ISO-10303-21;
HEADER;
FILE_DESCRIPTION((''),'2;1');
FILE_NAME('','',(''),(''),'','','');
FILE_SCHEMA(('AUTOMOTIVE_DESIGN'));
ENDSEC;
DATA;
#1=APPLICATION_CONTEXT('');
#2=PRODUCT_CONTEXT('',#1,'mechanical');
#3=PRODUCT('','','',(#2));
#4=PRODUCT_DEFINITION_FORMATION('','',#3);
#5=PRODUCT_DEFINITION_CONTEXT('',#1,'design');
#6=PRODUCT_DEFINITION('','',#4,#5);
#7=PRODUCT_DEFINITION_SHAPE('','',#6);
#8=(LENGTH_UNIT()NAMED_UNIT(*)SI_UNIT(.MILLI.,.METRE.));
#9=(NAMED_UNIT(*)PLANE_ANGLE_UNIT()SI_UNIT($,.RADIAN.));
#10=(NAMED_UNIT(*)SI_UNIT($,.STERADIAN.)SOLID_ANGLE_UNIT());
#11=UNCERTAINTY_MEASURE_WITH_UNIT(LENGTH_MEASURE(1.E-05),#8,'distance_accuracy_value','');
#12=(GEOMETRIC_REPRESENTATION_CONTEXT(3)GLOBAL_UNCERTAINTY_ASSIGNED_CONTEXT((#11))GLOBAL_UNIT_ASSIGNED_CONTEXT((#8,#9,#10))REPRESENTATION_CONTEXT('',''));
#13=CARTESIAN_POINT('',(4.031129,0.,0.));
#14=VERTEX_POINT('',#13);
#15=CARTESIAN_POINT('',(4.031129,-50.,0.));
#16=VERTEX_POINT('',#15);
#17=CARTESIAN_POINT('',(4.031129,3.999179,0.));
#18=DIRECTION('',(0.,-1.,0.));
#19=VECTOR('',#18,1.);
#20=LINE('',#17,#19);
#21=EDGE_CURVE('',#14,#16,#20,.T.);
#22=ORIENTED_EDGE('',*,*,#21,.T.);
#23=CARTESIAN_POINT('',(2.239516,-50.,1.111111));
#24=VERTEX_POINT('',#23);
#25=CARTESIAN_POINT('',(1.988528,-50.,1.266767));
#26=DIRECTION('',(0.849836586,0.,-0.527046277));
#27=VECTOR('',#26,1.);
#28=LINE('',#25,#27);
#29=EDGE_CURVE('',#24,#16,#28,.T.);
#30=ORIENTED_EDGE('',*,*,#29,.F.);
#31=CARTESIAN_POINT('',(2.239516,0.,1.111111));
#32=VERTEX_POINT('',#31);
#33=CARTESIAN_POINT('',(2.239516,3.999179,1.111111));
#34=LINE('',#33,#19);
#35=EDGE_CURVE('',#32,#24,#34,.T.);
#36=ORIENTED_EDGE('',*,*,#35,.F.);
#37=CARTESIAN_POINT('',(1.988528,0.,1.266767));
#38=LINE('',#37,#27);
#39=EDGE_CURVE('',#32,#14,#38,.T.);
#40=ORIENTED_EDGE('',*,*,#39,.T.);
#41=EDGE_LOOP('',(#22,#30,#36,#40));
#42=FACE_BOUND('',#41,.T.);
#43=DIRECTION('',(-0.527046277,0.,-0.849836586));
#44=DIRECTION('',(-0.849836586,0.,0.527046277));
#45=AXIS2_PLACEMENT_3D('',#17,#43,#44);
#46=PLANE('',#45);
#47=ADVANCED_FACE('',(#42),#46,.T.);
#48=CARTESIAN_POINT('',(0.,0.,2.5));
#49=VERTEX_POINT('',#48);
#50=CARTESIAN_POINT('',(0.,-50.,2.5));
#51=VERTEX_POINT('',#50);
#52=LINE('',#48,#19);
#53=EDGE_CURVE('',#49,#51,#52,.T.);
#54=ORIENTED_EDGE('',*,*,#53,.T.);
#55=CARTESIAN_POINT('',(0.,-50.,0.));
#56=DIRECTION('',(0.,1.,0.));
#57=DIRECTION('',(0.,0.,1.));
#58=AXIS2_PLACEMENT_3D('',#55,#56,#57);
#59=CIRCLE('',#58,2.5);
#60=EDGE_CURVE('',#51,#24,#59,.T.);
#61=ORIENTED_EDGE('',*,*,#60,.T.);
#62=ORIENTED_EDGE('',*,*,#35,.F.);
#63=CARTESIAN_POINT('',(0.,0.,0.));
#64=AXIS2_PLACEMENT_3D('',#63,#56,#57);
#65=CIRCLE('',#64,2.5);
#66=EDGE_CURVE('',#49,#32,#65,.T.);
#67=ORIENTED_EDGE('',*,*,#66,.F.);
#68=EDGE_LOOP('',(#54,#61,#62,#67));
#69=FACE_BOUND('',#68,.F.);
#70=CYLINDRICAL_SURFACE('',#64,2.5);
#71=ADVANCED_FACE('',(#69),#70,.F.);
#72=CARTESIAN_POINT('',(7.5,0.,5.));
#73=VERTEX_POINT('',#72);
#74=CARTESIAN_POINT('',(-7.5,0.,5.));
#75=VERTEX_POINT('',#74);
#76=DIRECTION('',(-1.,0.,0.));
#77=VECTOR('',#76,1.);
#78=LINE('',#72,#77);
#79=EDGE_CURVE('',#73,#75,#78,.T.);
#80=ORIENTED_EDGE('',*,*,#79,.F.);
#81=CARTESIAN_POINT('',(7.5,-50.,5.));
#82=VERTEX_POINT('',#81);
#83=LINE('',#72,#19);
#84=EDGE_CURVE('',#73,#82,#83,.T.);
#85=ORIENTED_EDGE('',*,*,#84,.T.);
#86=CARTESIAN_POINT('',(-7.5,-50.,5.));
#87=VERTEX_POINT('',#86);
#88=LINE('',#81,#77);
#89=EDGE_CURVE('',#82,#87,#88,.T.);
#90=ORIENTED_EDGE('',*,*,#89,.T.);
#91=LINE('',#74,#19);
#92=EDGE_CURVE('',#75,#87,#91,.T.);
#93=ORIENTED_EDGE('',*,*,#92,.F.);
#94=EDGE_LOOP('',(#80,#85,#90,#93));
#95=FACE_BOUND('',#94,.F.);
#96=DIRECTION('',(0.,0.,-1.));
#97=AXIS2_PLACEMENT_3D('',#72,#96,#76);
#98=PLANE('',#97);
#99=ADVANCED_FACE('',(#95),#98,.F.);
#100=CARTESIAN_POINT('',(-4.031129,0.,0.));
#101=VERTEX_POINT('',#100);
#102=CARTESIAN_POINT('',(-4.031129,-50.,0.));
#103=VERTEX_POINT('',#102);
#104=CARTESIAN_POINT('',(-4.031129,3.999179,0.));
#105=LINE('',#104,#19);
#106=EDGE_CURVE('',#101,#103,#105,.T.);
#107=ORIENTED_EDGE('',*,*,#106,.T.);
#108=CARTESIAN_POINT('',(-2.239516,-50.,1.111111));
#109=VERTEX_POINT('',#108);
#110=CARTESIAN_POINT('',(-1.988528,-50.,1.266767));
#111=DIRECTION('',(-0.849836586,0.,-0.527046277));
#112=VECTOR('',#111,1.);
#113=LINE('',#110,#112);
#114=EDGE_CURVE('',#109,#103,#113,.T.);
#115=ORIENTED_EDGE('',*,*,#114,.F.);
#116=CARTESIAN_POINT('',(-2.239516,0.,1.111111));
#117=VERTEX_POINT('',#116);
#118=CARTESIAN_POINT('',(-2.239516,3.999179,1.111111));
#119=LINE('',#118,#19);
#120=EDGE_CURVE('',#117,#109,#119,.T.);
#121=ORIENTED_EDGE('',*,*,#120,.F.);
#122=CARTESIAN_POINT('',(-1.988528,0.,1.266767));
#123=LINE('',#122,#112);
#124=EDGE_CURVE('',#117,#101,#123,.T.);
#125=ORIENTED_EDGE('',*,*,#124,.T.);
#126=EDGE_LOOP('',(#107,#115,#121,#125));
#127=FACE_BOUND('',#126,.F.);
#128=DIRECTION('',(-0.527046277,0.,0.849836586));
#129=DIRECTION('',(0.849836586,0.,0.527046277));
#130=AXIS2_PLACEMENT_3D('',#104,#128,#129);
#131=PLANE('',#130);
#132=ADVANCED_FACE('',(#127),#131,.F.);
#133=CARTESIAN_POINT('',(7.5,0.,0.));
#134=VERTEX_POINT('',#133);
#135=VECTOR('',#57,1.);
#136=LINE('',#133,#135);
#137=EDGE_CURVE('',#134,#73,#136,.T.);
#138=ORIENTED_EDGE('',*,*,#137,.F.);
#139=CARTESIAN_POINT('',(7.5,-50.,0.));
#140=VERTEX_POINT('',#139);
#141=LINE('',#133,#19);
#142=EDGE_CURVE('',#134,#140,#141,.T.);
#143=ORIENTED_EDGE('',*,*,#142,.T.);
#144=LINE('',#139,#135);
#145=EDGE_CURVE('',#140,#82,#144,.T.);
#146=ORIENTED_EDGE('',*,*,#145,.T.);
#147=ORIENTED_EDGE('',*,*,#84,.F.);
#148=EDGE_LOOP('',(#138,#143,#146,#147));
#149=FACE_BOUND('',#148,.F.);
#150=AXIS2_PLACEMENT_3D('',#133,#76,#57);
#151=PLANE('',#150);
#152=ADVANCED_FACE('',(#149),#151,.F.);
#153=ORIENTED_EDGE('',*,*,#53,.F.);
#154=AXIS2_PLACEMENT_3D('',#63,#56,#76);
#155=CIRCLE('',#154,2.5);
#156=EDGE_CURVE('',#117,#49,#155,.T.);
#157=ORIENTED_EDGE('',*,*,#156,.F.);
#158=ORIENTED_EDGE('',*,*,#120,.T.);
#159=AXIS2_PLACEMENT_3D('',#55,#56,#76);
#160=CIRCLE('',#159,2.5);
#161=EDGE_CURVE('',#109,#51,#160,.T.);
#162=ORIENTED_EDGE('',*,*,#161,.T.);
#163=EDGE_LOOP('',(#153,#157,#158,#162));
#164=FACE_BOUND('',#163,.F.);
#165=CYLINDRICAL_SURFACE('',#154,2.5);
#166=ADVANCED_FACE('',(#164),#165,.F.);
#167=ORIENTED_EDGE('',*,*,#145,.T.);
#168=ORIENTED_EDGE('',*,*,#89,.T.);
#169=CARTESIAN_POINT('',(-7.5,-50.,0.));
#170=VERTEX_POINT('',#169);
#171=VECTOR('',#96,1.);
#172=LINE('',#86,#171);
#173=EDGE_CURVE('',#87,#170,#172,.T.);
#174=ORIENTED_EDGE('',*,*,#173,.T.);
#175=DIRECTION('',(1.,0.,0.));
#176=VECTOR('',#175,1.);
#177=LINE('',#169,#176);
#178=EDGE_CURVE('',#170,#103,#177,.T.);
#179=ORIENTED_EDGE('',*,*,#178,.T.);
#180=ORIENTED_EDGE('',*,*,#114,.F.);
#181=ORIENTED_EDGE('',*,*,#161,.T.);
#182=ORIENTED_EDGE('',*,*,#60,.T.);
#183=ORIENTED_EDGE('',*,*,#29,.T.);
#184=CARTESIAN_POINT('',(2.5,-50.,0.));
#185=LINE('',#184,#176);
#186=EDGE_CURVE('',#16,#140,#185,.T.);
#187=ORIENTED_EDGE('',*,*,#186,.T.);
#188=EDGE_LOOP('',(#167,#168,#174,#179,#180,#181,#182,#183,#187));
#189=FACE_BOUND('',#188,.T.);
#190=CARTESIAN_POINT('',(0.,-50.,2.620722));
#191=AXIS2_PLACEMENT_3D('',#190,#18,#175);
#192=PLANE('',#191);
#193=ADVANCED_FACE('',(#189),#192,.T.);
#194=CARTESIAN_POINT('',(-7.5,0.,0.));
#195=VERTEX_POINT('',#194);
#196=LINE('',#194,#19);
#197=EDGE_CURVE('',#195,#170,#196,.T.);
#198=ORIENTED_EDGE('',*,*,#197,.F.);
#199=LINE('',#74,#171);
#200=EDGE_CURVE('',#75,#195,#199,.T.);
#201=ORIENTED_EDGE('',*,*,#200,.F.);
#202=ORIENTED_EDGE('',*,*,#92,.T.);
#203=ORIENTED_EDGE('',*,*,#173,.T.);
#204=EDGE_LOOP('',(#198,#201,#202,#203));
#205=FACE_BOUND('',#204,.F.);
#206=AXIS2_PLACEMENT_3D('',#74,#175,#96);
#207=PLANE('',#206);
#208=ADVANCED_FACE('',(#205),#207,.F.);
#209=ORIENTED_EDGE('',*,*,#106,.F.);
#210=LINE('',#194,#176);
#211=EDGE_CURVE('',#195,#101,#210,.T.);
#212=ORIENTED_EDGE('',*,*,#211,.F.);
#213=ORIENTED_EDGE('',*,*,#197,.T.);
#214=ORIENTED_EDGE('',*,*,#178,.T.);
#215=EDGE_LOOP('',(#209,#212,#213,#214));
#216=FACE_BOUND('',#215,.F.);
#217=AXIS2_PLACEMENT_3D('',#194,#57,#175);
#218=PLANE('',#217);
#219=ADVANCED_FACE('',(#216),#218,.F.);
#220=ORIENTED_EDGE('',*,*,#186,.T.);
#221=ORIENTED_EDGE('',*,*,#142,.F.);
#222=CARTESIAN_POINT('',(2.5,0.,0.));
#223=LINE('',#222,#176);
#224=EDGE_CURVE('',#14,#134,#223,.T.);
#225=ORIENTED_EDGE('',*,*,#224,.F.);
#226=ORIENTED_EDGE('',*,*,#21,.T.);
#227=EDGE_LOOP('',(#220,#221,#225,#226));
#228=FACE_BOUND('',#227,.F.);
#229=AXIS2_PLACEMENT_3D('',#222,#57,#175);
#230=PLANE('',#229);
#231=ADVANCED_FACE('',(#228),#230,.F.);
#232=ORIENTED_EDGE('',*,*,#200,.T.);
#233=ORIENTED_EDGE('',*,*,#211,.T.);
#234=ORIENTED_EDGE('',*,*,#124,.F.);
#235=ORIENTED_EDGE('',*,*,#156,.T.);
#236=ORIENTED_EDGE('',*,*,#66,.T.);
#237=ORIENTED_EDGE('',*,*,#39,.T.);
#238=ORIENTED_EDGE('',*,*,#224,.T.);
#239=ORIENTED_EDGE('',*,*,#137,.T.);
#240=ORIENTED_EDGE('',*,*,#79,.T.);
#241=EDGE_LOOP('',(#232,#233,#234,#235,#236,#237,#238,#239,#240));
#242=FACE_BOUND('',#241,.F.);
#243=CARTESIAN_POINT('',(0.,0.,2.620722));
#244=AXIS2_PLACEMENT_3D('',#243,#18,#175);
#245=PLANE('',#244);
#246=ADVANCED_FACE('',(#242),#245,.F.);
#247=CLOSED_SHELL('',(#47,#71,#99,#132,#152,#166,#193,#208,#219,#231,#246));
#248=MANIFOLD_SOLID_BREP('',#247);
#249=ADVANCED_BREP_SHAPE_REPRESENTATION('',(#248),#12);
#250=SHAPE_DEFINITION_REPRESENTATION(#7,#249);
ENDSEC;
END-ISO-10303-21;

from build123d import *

# Parameters (mm, degrees)
F1_DEPTH    = 50
F2_T1_DEPTH = 57.9983578358


# Not quite as in the source:
# - a fillet or chamfer that OpenCascade refuses, or shapes differently, is made with other operations: its cross-section is extruded or revolved along the edge and cut away or added


with BuildPart() as f1:
    # F0 (on Front) → F1 (new body)
    with BuildSketch(Plane.XZ):
        with BuildLine():
            Line((7.5, 5), (0, 5))
            Line((0, 5), (-7.5, 5))
            Line((-7.5, 5), (-7.5, 0))
            Line((-7.5, 0), (-2.5, 0))
            ThreePointArc((-2.5, 0), (-1.767766953, 1.767766953), (0, 2.5))
            ThreePointArc((0, 2.5), (1.767766953, 1.767766953), (2.5, 0))
            Line((2.5, 0), (7.5, 0))
            Line((7.5, 0), (7.5, 5))
        make_face()
    extrude(amount=F1_DEPTH)

    # F2: chamfer of 2 on 2 edges, made by hand

    # F2_s2 → F2_t1 (cut)
    with BuildSketch(Plane.XZ.offset(-3.9991789179)):
        with BuildLine():
            Line((-4.0311288741, 0), (-2.2395160412, 1.1111111111))
            ThreePointArc((-2.2395160412, 1.1111111111), (-2.4271314798, 0.5991934409), (-2.5, 0))
            Line((-2.5, 0), (-4.0311288741, 0))
        make_face()
        with BuildLine():
            Line((4.0311288741, 0), (2.2395160412, 1.1111111111))
            ThreePointArc((2.2395160412, 1.1111111111), (2.4271314798, 0.5991934409), (2.5, 0))
            Line((2.5, 0), (4.0311288741, 0))
        make_face()
    extrude(amount=F2_T1_DEPTH, mode=Mode.SUBTRACT)


solid = f1.part
